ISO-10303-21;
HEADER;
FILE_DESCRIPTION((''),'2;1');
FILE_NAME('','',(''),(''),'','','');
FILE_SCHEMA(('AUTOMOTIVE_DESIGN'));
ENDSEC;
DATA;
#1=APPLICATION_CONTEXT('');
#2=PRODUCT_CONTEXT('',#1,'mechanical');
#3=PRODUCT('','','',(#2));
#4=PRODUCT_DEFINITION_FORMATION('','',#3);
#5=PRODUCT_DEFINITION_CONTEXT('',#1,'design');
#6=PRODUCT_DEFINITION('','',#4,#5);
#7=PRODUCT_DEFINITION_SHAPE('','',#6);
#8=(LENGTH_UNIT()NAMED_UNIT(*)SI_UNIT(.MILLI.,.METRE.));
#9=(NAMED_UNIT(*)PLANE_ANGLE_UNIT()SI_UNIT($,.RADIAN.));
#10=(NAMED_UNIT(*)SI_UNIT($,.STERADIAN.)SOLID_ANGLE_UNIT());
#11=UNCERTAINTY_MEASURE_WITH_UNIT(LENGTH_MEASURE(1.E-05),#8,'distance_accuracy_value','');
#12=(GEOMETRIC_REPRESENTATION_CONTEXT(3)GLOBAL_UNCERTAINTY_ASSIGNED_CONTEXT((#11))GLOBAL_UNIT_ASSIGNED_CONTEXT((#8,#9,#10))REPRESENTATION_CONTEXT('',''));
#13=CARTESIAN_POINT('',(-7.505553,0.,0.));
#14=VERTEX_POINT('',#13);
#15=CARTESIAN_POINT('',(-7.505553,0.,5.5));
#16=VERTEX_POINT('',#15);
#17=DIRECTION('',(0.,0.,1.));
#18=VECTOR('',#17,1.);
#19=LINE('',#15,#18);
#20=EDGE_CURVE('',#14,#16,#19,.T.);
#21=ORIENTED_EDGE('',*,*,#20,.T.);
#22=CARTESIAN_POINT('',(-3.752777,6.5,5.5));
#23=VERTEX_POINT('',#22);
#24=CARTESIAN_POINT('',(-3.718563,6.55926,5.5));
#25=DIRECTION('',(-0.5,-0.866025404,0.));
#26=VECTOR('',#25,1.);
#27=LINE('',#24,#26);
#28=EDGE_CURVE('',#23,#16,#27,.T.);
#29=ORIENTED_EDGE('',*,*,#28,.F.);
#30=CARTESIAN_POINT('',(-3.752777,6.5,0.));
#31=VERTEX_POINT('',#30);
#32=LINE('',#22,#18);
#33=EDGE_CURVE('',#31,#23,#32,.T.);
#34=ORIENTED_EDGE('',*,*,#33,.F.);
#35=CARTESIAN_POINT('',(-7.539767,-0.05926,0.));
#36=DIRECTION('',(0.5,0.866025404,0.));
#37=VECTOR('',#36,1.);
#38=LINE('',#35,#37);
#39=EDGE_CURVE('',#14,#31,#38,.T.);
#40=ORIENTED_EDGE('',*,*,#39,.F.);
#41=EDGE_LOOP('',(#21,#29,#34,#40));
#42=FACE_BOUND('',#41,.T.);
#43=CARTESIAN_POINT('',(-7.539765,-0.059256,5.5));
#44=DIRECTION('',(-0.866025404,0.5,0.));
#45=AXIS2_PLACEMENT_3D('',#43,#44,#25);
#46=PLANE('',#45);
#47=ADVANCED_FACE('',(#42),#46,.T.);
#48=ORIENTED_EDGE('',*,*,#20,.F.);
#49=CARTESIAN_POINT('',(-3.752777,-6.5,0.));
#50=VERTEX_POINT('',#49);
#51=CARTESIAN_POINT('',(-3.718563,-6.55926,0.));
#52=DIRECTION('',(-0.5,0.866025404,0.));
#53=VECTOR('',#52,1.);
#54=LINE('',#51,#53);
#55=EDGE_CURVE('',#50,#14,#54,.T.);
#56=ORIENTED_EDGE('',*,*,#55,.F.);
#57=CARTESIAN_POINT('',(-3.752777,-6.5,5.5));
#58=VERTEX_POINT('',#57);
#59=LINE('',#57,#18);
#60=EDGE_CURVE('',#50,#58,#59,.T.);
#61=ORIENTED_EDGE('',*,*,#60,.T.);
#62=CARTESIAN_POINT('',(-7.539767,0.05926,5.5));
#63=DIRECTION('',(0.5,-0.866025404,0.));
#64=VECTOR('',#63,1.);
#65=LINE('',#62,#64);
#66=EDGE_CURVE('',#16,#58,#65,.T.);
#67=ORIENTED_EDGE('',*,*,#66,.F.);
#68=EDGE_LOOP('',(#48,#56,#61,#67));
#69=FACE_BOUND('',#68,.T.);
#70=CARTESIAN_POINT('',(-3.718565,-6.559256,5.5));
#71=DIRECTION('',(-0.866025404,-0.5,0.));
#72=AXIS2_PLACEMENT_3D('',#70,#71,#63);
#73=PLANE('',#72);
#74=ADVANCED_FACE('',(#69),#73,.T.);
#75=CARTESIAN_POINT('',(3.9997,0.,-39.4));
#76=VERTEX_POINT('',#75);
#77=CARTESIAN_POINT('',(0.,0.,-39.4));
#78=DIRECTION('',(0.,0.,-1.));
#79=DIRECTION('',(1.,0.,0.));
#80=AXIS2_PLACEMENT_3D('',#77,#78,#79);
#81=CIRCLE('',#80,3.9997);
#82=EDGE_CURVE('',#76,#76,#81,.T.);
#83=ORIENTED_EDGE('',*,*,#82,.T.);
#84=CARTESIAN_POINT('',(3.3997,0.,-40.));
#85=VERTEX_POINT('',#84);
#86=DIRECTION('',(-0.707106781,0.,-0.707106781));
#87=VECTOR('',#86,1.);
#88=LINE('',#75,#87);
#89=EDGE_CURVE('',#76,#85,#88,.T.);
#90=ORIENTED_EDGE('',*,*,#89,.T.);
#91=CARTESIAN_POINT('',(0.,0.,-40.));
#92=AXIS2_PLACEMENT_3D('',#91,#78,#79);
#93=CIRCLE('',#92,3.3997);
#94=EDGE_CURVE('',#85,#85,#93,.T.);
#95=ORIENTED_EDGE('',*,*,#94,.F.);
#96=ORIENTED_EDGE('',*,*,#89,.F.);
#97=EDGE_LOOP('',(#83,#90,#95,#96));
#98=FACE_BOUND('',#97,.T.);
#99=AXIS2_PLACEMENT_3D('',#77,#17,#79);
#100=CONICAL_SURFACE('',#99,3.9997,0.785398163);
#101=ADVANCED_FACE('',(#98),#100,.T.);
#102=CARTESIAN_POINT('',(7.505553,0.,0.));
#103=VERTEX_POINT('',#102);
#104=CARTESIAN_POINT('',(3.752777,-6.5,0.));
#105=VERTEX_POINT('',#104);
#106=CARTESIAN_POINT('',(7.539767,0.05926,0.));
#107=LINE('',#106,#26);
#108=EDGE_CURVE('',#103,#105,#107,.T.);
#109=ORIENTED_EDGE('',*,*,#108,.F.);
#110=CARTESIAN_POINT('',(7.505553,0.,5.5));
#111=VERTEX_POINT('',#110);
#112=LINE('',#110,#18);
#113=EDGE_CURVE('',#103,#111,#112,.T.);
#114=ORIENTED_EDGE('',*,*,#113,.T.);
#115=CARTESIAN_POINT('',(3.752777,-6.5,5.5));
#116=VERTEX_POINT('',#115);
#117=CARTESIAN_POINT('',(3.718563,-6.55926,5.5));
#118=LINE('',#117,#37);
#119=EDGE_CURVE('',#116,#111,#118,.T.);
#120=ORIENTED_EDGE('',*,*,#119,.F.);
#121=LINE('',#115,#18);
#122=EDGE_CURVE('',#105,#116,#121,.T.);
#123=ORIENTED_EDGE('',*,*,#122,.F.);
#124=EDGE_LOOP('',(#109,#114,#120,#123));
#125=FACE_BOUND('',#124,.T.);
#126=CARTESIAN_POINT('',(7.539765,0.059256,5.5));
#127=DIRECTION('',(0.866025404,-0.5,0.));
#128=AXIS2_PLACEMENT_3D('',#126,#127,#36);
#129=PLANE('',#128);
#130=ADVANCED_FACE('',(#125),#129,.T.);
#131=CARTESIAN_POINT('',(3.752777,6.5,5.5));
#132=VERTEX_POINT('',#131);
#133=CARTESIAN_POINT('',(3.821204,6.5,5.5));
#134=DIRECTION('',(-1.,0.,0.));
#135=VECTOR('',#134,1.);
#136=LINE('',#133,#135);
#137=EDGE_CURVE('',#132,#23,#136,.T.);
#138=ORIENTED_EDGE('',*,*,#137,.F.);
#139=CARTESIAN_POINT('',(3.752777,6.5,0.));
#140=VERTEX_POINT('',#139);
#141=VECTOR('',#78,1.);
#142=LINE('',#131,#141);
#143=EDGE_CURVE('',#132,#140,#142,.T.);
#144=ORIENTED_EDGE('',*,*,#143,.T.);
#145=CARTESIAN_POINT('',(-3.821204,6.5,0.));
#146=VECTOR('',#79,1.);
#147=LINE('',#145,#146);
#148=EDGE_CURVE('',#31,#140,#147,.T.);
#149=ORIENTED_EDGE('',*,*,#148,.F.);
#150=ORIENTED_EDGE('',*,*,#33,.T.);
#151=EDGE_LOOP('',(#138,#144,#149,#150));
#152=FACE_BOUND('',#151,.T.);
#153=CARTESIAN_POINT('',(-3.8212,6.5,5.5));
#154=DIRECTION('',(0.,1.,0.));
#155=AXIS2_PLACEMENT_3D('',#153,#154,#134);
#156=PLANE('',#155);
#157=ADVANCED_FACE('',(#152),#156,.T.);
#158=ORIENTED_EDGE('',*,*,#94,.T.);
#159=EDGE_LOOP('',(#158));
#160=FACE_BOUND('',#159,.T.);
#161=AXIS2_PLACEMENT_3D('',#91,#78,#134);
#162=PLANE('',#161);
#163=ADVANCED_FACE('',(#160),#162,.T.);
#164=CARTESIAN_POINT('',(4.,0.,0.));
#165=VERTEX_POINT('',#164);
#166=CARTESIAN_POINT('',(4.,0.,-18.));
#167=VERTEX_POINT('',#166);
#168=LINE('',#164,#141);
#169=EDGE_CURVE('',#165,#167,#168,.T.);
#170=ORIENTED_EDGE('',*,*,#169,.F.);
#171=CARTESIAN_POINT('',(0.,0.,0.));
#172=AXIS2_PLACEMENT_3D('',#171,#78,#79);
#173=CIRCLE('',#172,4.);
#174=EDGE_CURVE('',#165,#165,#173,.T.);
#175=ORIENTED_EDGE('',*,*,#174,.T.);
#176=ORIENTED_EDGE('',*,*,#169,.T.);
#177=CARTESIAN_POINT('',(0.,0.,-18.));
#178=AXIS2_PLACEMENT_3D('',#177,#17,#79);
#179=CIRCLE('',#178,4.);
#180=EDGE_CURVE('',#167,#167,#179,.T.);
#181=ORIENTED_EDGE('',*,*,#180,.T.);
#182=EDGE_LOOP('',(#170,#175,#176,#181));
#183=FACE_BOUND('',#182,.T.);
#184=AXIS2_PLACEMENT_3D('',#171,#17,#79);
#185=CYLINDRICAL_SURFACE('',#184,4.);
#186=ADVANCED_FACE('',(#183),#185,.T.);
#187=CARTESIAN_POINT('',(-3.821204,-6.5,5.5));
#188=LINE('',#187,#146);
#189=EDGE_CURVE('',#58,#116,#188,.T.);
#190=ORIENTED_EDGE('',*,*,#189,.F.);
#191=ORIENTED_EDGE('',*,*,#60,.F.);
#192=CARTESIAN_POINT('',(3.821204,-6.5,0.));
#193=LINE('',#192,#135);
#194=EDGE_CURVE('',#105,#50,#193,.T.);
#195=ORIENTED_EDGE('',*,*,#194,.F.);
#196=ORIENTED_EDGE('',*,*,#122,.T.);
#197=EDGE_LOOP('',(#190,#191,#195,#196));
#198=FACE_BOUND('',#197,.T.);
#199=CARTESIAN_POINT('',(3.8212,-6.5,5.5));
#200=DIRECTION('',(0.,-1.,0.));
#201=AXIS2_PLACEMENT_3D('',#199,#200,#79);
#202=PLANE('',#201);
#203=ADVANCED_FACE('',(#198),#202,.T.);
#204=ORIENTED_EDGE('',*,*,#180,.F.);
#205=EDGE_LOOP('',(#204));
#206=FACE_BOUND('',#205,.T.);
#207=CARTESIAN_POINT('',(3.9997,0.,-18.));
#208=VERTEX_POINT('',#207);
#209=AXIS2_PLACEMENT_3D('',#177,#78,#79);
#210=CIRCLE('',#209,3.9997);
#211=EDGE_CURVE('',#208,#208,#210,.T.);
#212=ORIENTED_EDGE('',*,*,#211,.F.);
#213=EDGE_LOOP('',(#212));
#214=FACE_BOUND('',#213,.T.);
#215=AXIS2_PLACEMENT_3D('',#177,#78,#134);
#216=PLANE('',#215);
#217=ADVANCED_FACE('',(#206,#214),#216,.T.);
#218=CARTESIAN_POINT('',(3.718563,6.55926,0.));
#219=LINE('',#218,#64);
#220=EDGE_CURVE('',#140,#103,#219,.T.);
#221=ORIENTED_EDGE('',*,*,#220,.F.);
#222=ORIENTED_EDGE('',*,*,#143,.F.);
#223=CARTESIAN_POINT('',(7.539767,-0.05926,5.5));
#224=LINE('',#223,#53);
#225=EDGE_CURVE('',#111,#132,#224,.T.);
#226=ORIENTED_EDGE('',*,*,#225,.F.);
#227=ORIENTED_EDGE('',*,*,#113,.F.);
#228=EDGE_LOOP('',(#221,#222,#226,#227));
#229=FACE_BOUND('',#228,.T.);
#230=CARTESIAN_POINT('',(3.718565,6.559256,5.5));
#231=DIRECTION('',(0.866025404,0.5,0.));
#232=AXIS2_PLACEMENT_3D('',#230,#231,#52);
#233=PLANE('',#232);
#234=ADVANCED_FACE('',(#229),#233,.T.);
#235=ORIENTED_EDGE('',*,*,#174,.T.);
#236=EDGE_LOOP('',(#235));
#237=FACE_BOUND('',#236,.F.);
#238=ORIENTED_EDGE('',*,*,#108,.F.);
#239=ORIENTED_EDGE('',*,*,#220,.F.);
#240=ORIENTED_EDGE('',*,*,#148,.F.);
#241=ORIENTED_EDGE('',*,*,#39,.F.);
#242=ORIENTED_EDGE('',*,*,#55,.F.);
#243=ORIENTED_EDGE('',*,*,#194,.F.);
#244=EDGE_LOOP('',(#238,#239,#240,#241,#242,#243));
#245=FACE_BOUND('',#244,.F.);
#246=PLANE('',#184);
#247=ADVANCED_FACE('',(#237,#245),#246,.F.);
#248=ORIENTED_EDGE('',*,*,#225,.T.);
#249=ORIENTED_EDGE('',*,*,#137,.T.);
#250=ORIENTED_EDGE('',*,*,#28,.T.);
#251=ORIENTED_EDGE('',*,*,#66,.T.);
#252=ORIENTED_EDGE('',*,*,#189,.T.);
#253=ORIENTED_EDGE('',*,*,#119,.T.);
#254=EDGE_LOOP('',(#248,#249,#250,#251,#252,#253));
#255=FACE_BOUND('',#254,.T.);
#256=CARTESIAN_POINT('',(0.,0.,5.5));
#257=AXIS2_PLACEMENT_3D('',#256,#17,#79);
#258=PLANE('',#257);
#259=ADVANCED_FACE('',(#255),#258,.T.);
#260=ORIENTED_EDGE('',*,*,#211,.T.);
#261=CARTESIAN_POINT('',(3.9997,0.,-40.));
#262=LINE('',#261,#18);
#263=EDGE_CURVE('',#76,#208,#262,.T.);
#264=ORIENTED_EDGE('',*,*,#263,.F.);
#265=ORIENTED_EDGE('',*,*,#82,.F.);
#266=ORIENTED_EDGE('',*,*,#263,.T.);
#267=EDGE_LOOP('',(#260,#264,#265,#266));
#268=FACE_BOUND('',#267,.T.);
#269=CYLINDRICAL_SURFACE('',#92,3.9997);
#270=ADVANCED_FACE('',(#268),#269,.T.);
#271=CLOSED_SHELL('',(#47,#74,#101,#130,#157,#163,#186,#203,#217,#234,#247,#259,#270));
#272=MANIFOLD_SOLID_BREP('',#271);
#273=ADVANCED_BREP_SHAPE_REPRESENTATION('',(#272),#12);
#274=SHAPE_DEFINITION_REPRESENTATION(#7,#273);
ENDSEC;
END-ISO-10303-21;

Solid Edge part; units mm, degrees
sketch "Sketch1" plane through (0, 0, 0) normal (0, 0, 1) x (1, 0, 0)
  circle A0 centre (0, 0) radius 7.54
  dimension "D1" = 15.08
extrude "Protrusion1" add sketch "Sketch1" along normal blind 5.5
sketch "Sketch2" plane through (0, 0, 0) normal (0, 0, -1) x (1, 0, 0)
  circle A0 centre (0, 0) radius 4
extrude "Protrusion2" add sketch "Sketch2" along normal blind 40
sketch "Sketch3" plane through (0, 0, -40) normal (0, 0, -1) x (1, 0, 0)
  circle A0 centre (0, 0) radius 3.9997
extrude "Cutout1" cut sketch "Sketch3" against normal blind 22 flip side to cut
chamfer "Chamfer_1" distance 0.6 angle 45 1 edges at (-3.9997, 0, -40)
sketch "Sketch4" plane through (0, 0, 5.5) normal (0, 0, 1) x (1, 0, 0)
  line L0 (-3.8212, 6.5) -> (3.8212, 6.5)
  dimension "D1" = 13
extrude "Cutout2" cut sketch "Sketch4" against normal up to next material side at (0, 6.55, 5.5)
pattern_circular "Pattern1" count 6 over 360 about axis through (0, 0, 5.5) along (0, 0, 1) of "Cutout2"
properties part number "24101233"
